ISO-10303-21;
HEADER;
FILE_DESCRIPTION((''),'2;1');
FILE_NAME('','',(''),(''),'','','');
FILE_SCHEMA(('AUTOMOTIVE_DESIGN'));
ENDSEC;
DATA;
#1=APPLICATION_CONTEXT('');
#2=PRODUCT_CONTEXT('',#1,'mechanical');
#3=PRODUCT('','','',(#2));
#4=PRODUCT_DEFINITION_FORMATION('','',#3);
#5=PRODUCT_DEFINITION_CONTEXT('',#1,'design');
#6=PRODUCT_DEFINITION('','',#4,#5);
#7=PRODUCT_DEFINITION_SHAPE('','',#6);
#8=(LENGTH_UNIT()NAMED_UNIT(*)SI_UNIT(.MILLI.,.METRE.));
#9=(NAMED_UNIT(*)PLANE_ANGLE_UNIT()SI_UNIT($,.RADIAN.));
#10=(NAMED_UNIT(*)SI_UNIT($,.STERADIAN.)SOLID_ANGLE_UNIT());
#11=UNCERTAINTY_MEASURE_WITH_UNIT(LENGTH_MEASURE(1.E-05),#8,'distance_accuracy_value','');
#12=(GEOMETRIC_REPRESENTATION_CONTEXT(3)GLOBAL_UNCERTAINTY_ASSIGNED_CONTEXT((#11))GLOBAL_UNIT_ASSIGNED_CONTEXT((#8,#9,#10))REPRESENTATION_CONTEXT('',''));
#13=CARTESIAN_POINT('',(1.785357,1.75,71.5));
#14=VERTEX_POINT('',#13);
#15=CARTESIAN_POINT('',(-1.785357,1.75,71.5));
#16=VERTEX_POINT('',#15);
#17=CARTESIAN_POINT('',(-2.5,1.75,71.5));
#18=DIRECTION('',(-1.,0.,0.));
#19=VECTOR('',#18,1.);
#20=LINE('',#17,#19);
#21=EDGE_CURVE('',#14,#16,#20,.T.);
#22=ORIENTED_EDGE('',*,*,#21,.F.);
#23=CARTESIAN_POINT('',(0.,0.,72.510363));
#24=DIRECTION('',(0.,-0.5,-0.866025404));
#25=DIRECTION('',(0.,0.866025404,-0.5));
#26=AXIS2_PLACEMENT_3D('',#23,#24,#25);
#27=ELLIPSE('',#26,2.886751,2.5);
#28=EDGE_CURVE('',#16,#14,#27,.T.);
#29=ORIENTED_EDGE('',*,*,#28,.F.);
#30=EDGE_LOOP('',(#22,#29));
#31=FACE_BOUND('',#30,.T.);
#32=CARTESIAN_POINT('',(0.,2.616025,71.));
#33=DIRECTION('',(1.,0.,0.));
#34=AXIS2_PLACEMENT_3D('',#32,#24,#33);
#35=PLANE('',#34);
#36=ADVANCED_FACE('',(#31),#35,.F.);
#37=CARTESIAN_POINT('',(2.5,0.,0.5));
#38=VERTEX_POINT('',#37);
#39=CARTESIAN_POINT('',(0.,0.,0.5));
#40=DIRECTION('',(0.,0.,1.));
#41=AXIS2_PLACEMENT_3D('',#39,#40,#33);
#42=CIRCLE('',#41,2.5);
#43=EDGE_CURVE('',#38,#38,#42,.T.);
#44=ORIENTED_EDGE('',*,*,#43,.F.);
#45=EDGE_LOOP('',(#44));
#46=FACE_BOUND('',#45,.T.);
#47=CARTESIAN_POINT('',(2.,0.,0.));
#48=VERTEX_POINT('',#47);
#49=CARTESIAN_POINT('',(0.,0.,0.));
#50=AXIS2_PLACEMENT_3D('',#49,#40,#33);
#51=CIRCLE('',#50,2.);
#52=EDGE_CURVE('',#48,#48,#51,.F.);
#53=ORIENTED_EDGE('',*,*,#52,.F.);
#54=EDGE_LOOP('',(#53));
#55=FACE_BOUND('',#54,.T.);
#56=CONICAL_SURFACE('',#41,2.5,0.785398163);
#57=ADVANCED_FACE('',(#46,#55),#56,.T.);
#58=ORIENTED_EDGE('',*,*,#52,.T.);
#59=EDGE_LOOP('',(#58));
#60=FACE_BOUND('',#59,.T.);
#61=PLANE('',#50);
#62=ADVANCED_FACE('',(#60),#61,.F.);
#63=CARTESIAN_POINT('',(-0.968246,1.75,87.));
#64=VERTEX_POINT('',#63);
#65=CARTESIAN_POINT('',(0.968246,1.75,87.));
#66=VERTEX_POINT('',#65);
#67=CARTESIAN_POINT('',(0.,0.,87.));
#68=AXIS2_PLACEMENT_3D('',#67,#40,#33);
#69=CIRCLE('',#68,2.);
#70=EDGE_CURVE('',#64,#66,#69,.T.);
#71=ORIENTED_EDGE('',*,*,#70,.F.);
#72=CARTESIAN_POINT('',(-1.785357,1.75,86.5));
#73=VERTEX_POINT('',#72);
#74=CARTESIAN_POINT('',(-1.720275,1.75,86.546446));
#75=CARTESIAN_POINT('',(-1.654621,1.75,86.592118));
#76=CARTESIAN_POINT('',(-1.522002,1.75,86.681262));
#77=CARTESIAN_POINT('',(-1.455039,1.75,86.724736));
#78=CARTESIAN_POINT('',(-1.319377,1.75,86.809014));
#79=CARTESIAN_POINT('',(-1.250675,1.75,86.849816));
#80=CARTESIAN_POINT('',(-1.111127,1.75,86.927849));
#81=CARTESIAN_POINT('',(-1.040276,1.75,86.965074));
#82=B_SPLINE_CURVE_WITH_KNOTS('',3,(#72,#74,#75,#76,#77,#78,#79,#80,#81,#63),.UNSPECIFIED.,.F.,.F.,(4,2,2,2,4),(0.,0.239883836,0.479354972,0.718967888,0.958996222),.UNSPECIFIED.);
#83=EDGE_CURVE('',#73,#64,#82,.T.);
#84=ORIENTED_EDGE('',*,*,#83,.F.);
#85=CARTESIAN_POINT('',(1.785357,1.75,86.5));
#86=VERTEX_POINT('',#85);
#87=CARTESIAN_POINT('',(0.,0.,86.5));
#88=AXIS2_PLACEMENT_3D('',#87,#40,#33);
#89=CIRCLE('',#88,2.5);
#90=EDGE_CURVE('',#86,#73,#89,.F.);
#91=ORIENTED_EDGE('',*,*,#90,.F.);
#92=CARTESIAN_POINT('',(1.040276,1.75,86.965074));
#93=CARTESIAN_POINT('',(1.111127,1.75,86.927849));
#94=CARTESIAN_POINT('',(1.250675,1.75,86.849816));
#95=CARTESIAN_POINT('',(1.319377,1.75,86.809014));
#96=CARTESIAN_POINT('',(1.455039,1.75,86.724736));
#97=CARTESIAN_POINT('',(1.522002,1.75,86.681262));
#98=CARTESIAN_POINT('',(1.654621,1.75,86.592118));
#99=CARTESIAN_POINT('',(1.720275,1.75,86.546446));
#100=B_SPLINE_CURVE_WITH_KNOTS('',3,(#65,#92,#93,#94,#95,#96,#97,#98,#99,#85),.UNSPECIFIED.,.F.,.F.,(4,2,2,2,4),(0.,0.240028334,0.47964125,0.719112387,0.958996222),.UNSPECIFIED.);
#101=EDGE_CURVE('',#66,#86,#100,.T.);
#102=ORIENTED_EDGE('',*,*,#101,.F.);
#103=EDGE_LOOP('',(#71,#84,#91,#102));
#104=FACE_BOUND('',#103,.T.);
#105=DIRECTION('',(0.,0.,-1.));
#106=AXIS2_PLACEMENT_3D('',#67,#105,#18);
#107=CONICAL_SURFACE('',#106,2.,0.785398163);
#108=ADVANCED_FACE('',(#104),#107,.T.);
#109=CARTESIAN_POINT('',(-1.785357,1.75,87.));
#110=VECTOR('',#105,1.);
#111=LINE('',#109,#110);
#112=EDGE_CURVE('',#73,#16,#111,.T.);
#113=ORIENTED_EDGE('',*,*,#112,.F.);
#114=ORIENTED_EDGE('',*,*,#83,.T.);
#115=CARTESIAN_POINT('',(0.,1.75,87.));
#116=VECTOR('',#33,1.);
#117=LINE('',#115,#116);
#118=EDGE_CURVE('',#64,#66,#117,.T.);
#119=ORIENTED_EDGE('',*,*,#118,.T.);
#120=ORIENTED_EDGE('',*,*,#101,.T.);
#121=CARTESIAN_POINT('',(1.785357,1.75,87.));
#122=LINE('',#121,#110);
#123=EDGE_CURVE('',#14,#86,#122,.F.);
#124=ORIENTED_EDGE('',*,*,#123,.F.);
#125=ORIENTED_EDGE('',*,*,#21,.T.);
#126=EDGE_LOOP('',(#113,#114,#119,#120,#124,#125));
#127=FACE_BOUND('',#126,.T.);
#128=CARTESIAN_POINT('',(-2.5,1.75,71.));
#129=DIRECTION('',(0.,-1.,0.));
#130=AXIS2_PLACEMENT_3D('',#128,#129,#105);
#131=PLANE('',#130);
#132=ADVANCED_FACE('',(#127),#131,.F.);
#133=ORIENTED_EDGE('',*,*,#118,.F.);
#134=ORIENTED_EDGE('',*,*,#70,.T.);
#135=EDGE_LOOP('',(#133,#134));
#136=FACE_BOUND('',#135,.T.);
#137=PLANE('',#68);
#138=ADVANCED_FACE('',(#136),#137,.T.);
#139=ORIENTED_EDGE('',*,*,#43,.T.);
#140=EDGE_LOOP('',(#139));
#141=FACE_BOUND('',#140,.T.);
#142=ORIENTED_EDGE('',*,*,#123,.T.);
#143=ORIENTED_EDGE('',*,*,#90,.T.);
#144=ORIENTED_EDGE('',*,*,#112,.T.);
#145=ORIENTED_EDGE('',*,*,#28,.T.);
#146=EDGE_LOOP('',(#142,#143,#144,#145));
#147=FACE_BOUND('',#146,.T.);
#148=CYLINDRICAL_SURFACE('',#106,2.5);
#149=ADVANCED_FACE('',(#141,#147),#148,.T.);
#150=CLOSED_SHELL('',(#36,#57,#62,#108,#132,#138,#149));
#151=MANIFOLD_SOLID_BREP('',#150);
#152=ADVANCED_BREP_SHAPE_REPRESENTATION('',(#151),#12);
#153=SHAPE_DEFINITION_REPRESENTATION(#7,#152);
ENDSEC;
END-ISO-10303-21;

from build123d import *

# Parameters (mm, degrees)
SKETCH1_R           = 2.5
BOSS_EXTRUDE1_DEPTH = 87
SKETCH2_W           = 5
SKETCH2_H           = 0.75
CUT_EXTRUDE1_DEPTH  = 16
CHAMFER1_SIZE       = 0.5
CHAMFER2_SIZE       = 0.866025404
CHAMFER2_SIZE_2     = 0.5


with BuildPart() as part:
    # Sketch1 → Boss-Extrude1 (new body)
    with BuildSketch(Plane.XY):
        Circle(SKETCH1_R)
    extrude(amount=BOSS_EXTRUDE1_DEPTH)

    # Sketch2 → Cut-Extrude1 (cut)
    with BuildSketch(Plane.XY.offset(87)):
        with Locations((0, 2.125)):
            Rectangle(SKETCH2_W, SKETCH2_H)
    extrude(amount=-CUT_EXTRUDE1_DEPTH, mode=Mode.SUBTRACT)

    # Chamfer1
    chamfer1_edges = [part.edges().sort_by_distance(p)[0] for p in [
        (-2.5, 0, 0),
        (-0.945147404, -2.314453798, 87),
    ]]
    chamfer(chamfer1_edges, length=CHAMFER1_SIZE)

    # Chamfer2
    # the kernel refuses this chamfer: 0.866025404, 0.5 mm, written as the material it adds along each edge
    with BuildSketch(Plane(origin=(4.025839092, 1.75, 71), x_dir=(0, 0.999813220622208, -0.01932676561269574), z_dir=(-1, 0, 0))) as chamfer2_piece_1_section:
        Polygon((CHAMFER2_SIZE * 0.999813220373, -CHAMFER2_SIZE * 0.0193267656079), (-CHAMFER2_SIZE_2 * 0.0193267656127, -CHAMFER2_SIZE_2 * 0.999813220622), (0, 0), align=None)
    chamfer2_piece_1 = extrude(amount=8.051678185, mode=Mode.PRIVATE)
    chamfer2_piece_1 = chamfer2_piece_1 & Plane(origin=(0, 0, 71.180869941), x_dir=(1, 0, 0), z_dir=(0, 0, -1)) * Cylinder(2.5, 20, mode=Mode.PRIVATE)
    add(chamfer2_piece_1)


solid = part.part
